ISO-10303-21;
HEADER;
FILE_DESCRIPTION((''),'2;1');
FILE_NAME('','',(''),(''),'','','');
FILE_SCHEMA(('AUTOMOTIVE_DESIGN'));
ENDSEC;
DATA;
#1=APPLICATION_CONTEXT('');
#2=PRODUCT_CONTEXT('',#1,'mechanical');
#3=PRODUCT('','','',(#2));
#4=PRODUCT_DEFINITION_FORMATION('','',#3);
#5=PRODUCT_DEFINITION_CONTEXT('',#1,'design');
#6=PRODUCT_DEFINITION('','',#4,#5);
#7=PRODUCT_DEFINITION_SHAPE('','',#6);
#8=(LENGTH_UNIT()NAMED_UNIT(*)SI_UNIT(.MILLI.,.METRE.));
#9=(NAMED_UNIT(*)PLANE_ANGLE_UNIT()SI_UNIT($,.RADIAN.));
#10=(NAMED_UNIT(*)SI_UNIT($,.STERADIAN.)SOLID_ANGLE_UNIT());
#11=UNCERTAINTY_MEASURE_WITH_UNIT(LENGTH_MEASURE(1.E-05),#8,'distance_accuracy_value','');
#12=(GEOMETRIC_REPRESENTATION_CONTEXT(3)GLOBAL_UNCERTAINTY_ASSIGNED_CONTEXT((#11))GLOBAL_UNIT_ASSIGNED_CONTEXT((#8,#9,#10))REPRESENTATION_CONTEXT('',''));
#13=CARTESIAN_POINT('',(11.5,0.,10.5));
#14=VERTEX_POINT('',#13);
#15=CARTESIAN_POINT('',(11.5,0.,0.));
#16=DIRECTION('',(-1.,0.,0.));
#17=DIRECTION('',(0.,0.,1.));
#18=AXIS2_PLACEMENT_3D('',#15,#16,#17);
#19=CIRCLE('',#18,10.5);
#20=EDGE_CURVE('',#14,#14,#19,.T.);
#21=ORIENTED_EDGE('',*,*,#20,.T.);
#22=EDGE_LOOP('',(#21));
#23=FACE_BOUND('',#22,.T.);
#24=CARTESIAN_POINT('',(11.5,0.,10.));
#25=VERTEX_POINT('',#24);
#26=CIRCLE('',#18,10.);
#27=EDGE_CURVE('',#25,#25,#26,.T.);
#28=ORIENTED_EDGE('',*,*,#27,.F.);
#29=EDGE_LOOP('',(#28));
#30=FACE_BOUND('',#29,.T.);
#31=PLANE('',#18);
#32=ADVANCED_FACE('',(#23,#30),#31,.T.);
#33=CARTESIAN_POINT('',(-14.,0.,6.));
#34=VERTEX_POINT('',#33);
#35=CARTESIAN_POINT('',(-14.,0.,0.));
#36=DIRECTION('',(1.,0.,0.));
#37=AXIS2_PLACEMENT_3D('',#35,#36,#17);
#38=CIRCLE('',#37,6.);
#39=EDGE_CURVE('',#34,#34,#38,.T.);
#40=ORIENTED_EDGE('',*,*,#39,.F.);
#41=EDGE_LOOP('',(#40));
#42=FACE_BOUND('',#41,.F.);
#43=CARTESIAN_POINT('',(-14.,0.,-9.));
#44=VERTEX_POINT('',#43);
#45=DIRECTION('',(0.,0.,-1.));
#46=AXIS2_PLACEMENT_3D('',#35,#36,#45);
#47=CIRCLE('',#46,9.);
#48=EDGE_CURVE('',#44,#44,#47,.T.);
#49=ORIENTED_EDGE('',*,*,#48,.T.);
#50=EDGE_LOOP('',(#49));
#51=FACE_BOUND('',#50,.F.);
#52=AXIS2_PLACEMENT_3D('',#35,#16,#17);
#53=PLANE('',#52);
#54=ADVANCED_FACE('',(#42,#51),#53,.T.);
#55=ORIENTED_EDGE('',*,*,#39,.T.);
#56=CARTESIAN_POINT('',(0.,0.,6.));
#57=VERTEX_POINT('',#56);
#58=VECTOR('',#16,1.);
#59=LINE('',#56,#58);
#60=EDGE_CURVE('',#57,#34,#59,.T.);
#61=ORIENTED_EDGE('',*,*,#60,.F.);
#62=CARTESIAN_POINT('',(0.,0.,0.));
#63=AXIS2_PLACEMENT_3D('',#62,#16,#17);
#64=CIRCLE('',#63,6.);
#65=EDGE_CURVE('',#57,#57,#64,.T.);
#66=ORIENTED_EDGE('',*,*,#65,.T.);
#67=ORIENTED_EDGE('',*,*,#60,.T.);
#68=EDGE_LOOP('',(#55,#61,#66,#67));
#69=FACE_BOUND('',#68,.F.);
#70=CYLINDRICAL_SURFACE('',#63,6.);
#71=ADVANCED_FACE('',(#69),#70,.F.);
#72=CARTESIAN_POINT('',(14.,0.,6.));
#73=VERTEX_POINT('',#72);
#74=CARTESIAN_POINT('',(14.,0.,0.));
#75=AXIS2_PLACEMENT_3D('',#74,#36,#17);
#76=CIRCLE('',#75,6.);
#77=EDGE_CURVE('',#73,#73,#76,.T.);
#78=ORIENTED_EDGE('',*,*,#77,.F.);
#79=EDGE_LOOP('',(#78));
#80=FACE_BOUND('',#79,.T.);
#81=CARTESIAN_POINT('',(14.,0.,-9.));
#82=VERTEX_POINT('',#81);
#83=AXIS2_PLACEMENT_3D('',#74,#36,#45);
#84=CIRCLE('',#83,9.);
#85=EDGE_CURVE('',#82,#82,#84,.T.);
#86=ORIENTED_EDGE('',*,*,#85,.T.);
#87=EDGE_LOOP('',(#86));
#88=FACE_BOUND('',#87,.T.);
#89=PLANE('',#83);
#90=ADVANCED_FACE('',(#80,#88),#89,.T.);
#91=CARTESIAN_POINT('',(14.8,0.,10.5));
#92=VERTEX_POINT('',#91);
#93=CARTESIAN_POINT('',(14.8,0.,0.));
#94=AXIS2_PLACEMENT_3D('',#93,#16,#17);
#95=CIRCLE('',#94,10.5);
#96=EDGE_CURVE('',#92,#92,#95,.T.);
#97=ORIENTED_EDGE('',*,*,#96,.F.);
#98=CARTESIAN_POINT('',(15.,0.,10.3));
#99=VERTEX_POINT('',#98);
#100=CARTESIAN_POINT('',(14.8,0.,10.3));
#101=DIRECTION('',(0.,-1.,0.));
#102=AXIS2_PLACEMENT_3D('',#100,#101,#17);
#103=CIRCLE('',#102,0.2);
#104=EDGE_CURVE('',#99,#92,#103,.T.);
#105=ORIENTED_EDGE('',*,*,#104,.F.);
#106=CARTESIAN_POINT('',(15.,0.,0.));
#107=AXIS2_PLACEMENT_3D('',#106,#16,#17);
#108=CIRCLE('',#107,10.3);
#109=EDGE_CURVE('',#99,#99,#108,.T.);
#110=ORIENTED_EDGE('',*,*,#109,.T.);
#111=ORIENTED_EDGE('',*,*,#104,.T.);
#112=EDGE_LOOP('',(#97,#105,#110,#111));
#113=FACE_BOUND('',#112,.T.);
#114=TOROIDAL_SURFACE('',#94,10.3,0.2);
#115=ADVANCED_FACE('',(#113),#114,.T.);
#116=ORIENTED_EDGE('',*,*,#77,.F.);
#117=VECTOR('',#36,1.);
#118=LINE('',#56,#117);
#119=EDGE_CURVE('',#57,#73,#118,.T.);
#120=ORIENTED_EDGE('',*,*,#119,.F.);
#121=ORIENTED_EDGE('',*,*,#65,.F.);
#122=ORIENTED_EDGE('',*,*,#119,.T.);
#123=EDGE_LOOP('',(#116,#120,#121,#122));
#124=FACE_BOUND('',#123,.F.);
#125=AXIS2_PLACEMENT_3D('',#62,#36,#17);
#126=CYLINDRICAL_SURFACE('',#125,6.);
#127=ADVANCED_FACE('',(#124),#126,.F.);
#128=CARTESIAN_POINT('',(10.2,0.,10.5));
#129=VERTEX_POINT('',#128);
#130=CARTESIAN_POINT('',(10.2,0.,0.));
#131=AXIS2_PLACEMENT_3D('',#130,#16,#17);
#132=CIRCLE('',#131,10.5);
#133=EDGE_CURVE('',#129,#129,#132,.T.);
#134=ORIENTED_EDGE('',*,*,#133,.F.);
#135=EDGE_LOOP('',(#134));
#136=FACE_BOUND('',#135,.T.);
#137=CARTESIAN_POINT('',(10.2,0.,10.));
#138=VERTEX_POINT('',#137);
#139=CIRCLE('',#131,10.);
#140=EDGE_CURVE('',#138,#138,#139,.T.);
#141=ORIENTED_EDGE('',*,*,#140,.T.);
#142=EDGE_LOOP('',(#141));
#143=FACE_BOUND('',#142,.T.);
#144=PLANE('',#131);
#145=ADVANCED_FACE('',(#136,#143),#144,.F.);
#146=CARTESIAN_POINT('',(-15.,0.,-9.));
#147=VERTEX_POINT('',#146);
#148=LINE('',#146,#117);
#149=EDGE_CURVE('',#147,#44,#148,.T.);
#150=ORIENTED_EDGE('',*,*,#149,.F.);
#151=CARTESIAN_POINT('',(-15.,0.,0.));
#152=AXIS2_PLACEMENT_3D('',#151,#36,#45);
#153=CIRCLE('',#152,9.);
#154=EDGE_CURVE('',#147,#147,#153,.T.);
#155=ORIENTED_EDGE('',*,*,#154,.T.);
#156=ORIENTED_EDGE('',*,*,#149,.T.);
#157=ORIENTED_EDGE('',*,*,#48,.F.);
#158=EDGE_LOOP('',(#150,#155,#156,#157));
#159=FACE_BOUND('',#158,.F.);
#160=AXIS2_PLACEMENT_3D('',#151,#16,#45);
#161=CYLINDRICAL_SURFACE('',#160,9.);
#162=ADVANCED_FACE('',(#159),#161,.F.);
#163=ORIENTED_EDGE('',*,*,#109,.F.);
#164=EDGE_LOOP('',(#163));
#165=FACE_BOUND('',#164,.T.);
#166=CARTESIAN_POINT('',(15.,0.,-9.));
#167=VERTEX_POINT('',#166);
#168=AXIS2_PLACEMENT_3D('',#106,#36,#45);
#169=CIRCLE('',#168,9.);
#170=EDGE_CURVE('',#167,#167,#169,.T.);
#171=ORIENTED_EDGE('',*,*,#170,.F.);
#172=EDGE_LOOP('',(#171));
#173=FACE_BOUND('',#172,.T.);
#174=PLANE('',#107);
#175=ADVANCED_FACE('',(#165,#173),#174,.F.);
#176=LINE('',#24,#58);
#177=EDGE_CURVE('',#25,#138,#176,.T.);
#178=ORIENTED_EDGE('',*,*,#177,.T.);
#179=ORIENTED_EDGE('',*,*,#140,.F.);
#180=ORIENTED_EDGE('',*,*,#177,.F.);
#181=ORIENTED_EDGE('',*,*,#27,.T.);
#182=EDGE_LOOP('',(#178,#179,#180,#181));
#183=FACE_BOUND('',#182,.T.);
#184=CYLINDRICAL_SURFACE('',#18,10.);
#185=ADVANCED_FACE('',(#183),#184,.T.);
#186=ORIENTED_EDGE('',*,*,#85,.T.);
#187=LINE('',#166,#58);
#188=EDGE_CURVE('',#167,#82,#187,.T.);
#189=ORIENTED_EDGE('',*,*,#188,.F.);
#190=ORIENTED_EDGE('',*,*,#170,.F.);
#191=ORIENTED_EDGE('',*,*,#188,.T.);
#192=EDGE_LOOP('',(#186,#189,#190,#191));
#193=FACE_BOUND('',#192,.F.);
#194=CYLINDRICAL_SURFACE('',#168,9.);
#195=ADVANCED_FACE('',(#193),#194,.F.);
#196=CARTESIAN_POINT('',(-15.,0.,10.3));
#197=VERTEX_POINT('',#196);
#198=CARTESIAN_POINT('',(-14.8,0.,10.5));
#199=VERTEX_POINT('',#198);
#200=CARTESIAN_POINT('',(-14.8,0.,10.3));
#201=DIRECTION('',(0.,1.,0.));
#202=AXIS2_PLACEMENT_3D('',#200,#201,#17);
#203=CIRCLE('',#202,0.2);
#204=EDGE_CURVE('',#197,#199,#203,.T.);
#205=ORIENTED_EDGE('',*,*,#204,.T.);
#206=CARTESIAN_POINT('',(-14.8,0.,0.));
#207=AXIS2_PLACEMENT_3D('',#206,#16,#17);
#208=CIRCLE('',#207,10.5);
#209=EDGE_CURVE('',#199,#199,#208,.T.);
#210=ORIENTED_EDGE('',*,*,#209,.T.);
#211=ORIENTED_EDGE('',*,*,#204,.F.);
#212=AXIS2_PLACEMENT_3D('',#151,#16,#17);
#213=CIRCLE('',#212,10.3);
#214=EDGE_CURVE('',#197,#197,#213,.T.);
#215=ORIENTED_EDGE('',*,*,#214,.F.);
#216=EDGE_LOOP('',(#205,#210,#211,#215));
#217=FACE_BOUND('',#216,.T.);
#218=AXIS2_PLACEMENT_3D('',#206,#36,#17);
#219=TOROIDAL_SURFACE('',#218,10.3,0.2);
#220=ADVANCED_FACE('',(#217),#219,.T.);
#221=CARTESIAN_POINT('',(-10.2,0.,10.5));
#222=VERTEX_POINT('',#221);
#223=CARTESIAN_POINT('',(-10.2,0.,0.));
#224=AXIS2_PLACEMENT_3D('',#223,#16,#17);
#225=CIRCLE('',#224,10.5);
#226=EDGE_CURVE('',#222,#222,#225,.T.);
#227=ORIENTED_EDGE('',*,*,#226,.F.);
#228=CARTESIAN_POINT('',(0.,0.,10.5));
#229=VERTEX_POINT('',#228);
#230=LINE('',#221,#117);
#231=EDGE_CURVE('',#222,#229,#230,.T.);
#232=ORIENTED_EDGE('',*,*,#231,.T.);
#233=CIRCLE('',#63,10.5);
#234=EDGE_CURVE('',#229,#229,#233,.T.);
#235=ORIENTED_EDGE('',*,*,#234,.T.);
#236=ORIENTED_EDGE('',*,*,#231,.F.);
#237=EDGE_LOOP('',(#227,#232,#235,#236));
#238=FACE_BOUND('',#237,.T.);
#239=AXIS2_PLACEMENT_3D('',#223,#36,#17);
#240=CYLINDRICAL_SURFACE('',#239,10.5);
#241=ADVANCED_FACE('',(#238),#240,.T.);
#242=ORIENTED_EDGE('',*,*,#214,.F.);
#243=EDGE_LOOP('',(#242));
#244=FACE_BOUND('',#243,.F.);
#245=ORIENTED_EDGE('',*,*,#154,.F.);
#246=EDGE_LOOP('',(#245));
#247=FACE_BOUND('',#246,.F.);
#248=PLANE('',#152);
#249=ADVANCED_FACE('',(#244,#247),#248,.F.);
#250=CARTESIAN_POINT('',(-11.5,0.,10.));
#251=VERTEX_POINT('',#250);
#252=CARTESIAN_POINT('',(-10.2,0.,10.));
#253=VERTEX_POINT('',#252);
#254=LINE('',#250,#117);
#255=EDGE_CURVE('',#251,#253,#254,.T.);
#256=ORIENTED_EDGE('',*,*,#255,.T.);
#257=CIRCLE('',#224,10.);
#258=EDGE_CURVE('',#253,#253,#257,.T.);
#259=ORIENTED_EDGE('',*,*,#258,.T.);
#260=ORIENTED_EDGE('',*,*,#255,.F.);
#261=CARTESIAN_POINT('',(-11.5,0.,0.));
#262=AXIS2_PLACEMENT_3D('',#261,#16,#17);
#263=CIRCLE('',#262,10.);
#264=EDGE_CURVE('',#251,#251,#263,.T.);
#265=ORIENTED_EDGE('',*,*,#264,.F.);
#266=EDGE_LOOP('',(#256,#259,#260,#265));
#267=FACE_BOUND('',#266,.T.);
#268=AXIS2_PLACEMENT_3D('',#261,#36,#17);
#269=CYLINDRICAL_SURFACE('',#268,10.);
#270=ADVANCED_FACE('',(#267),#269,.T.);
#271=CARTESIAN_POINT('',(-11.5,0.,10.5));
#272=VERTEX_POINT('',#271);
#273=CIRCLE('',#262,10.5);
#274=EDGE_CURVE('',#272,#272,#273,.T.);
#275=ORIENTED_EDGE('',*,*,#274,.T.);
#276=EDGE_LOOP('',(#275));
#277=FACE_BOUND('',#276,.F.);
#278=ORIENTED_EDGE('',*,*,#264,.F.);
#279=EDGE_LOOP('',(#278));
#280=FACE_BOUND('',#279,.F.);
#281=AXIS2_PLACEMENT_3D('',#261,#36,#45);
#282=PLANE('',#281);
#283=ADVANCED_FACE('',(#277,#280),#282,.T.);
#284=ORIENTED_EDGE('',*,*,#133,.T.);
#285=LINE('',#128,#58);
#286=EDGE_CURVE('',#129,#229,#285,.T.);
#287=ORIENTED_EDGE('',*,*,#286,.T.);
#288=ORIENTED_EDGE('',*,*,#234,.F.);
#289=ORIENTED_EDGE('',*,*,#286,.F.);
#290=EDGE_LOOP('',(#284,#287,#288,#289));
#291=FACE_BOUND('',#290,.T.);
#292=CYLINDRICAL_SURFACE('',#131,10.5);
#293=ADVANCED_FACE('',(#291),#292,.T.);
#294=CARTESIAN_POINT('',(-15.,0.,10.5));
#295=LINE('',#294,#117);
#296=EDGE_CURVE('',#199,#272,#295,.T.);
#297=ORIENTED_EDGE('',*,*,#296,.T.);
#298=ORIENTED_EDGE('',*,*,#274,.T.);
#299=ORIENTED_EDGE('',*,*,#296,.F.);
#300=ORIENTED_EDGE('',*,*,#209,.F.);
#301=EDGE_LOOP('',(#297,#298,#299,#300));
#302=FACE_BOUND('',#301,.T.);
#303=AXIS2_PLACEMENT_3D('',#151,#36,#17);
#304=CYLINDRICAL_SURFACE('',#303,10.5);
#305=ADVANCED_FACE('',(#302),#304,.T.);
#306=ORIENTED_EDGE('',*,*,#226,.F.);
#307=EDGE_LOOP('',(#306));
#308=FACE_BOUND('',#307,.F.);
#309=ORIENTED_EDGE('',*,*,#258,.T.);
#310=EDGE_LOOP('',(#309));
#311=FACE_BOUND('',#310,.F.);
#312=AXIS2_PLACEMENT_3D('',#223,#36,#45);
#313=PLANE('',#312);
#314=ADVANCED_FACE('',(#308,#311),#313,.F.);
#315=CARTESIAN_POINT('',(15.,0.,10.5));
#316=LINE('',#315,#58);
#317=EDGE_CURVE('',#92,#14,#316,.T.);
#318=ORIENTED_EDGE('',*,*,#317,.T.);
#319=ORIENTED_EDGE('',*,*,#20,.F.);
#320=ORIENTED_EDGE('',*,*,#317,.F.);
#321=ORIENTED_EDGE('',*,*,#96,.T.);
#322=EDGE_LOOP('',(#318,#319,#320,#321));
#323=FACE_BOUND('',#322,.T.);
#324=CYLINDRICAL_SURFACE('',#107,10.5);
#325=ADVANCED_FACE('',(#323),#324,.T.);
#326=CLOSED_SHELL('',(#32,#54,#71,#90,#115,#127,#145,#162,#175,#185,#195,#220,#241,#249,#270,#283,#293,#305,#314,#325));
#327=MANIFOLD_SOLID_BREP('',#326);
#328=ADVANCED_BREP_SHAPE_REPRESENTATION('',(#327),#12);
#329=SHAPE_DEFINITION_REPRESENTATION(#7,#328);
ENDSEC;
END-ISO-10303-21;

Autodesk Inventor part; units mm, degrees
ref_plane "YZ Plane" through (0, 0, 0) normal (1, 0, 0) x (0, 1, 0)
ref_plane "XZ Plane" through (0, 0, 0) normal (0, 1, 0) x (-1, 0, 0)
ref_plane "XY Plane" through (0, 0, 0) normal (0, 0, 1) x (1, 0, 0)
sketch "Schizzo1" plane through (0, 0, 0) normal (0, 1, 0) x (-1, 0, 0)
  line L0 (-15, 6) -> (-15, 10.5)
  line L1 (-15, 10.5) -> (-11.5, 10.5)
  line L2 (-11.5, 10.5) -> (-11.5, 10)
  line L3 (-11.5, 10) -> (-10.2, 10)
  line L4 (-10.2, 10) -> (-10.2, 10.5)
  line L5 (-10.2, 10.5) -> (0, 10.5)
  line L6 (0, 10.5) -> (0, 6)
  line L7 (0, 6) -> (-15, 6)
  line L8 (0, 0) -> (5.7518, 0)
  dimension "d0" = 12
  dimension "d2" = 21
  dimension "d3" = 15
  dimension "d4" = 11.5
  dimension "d5" = 1.3
  dimension "d6" = 20
revolve "Rivoluzione1" add sketch "Schizzo1" angle 360 about axis through (0, 0, 0) along (-1, 0, 0)
fillet "Raccordo1" radius 0.2 1 edges at (15, 0, -10.5)
sketch "Schizzo2" plane through (15, 0, 0) normal (1, 0, 0) x (0, 0, -1)
  circle A0 centre (0, 0) radius 10.3 projected
  circle A1 centre (0, 0) radius 9
  dimension "d13" = 18
extrude "Estrusione2" cut sketch "Schizzo2" against normal blind 1 contours A1
mirror "Specchio1" about plane through (0, 0, 8.25) normal (-1, 0, 0)
properties part number "LM12UU"
